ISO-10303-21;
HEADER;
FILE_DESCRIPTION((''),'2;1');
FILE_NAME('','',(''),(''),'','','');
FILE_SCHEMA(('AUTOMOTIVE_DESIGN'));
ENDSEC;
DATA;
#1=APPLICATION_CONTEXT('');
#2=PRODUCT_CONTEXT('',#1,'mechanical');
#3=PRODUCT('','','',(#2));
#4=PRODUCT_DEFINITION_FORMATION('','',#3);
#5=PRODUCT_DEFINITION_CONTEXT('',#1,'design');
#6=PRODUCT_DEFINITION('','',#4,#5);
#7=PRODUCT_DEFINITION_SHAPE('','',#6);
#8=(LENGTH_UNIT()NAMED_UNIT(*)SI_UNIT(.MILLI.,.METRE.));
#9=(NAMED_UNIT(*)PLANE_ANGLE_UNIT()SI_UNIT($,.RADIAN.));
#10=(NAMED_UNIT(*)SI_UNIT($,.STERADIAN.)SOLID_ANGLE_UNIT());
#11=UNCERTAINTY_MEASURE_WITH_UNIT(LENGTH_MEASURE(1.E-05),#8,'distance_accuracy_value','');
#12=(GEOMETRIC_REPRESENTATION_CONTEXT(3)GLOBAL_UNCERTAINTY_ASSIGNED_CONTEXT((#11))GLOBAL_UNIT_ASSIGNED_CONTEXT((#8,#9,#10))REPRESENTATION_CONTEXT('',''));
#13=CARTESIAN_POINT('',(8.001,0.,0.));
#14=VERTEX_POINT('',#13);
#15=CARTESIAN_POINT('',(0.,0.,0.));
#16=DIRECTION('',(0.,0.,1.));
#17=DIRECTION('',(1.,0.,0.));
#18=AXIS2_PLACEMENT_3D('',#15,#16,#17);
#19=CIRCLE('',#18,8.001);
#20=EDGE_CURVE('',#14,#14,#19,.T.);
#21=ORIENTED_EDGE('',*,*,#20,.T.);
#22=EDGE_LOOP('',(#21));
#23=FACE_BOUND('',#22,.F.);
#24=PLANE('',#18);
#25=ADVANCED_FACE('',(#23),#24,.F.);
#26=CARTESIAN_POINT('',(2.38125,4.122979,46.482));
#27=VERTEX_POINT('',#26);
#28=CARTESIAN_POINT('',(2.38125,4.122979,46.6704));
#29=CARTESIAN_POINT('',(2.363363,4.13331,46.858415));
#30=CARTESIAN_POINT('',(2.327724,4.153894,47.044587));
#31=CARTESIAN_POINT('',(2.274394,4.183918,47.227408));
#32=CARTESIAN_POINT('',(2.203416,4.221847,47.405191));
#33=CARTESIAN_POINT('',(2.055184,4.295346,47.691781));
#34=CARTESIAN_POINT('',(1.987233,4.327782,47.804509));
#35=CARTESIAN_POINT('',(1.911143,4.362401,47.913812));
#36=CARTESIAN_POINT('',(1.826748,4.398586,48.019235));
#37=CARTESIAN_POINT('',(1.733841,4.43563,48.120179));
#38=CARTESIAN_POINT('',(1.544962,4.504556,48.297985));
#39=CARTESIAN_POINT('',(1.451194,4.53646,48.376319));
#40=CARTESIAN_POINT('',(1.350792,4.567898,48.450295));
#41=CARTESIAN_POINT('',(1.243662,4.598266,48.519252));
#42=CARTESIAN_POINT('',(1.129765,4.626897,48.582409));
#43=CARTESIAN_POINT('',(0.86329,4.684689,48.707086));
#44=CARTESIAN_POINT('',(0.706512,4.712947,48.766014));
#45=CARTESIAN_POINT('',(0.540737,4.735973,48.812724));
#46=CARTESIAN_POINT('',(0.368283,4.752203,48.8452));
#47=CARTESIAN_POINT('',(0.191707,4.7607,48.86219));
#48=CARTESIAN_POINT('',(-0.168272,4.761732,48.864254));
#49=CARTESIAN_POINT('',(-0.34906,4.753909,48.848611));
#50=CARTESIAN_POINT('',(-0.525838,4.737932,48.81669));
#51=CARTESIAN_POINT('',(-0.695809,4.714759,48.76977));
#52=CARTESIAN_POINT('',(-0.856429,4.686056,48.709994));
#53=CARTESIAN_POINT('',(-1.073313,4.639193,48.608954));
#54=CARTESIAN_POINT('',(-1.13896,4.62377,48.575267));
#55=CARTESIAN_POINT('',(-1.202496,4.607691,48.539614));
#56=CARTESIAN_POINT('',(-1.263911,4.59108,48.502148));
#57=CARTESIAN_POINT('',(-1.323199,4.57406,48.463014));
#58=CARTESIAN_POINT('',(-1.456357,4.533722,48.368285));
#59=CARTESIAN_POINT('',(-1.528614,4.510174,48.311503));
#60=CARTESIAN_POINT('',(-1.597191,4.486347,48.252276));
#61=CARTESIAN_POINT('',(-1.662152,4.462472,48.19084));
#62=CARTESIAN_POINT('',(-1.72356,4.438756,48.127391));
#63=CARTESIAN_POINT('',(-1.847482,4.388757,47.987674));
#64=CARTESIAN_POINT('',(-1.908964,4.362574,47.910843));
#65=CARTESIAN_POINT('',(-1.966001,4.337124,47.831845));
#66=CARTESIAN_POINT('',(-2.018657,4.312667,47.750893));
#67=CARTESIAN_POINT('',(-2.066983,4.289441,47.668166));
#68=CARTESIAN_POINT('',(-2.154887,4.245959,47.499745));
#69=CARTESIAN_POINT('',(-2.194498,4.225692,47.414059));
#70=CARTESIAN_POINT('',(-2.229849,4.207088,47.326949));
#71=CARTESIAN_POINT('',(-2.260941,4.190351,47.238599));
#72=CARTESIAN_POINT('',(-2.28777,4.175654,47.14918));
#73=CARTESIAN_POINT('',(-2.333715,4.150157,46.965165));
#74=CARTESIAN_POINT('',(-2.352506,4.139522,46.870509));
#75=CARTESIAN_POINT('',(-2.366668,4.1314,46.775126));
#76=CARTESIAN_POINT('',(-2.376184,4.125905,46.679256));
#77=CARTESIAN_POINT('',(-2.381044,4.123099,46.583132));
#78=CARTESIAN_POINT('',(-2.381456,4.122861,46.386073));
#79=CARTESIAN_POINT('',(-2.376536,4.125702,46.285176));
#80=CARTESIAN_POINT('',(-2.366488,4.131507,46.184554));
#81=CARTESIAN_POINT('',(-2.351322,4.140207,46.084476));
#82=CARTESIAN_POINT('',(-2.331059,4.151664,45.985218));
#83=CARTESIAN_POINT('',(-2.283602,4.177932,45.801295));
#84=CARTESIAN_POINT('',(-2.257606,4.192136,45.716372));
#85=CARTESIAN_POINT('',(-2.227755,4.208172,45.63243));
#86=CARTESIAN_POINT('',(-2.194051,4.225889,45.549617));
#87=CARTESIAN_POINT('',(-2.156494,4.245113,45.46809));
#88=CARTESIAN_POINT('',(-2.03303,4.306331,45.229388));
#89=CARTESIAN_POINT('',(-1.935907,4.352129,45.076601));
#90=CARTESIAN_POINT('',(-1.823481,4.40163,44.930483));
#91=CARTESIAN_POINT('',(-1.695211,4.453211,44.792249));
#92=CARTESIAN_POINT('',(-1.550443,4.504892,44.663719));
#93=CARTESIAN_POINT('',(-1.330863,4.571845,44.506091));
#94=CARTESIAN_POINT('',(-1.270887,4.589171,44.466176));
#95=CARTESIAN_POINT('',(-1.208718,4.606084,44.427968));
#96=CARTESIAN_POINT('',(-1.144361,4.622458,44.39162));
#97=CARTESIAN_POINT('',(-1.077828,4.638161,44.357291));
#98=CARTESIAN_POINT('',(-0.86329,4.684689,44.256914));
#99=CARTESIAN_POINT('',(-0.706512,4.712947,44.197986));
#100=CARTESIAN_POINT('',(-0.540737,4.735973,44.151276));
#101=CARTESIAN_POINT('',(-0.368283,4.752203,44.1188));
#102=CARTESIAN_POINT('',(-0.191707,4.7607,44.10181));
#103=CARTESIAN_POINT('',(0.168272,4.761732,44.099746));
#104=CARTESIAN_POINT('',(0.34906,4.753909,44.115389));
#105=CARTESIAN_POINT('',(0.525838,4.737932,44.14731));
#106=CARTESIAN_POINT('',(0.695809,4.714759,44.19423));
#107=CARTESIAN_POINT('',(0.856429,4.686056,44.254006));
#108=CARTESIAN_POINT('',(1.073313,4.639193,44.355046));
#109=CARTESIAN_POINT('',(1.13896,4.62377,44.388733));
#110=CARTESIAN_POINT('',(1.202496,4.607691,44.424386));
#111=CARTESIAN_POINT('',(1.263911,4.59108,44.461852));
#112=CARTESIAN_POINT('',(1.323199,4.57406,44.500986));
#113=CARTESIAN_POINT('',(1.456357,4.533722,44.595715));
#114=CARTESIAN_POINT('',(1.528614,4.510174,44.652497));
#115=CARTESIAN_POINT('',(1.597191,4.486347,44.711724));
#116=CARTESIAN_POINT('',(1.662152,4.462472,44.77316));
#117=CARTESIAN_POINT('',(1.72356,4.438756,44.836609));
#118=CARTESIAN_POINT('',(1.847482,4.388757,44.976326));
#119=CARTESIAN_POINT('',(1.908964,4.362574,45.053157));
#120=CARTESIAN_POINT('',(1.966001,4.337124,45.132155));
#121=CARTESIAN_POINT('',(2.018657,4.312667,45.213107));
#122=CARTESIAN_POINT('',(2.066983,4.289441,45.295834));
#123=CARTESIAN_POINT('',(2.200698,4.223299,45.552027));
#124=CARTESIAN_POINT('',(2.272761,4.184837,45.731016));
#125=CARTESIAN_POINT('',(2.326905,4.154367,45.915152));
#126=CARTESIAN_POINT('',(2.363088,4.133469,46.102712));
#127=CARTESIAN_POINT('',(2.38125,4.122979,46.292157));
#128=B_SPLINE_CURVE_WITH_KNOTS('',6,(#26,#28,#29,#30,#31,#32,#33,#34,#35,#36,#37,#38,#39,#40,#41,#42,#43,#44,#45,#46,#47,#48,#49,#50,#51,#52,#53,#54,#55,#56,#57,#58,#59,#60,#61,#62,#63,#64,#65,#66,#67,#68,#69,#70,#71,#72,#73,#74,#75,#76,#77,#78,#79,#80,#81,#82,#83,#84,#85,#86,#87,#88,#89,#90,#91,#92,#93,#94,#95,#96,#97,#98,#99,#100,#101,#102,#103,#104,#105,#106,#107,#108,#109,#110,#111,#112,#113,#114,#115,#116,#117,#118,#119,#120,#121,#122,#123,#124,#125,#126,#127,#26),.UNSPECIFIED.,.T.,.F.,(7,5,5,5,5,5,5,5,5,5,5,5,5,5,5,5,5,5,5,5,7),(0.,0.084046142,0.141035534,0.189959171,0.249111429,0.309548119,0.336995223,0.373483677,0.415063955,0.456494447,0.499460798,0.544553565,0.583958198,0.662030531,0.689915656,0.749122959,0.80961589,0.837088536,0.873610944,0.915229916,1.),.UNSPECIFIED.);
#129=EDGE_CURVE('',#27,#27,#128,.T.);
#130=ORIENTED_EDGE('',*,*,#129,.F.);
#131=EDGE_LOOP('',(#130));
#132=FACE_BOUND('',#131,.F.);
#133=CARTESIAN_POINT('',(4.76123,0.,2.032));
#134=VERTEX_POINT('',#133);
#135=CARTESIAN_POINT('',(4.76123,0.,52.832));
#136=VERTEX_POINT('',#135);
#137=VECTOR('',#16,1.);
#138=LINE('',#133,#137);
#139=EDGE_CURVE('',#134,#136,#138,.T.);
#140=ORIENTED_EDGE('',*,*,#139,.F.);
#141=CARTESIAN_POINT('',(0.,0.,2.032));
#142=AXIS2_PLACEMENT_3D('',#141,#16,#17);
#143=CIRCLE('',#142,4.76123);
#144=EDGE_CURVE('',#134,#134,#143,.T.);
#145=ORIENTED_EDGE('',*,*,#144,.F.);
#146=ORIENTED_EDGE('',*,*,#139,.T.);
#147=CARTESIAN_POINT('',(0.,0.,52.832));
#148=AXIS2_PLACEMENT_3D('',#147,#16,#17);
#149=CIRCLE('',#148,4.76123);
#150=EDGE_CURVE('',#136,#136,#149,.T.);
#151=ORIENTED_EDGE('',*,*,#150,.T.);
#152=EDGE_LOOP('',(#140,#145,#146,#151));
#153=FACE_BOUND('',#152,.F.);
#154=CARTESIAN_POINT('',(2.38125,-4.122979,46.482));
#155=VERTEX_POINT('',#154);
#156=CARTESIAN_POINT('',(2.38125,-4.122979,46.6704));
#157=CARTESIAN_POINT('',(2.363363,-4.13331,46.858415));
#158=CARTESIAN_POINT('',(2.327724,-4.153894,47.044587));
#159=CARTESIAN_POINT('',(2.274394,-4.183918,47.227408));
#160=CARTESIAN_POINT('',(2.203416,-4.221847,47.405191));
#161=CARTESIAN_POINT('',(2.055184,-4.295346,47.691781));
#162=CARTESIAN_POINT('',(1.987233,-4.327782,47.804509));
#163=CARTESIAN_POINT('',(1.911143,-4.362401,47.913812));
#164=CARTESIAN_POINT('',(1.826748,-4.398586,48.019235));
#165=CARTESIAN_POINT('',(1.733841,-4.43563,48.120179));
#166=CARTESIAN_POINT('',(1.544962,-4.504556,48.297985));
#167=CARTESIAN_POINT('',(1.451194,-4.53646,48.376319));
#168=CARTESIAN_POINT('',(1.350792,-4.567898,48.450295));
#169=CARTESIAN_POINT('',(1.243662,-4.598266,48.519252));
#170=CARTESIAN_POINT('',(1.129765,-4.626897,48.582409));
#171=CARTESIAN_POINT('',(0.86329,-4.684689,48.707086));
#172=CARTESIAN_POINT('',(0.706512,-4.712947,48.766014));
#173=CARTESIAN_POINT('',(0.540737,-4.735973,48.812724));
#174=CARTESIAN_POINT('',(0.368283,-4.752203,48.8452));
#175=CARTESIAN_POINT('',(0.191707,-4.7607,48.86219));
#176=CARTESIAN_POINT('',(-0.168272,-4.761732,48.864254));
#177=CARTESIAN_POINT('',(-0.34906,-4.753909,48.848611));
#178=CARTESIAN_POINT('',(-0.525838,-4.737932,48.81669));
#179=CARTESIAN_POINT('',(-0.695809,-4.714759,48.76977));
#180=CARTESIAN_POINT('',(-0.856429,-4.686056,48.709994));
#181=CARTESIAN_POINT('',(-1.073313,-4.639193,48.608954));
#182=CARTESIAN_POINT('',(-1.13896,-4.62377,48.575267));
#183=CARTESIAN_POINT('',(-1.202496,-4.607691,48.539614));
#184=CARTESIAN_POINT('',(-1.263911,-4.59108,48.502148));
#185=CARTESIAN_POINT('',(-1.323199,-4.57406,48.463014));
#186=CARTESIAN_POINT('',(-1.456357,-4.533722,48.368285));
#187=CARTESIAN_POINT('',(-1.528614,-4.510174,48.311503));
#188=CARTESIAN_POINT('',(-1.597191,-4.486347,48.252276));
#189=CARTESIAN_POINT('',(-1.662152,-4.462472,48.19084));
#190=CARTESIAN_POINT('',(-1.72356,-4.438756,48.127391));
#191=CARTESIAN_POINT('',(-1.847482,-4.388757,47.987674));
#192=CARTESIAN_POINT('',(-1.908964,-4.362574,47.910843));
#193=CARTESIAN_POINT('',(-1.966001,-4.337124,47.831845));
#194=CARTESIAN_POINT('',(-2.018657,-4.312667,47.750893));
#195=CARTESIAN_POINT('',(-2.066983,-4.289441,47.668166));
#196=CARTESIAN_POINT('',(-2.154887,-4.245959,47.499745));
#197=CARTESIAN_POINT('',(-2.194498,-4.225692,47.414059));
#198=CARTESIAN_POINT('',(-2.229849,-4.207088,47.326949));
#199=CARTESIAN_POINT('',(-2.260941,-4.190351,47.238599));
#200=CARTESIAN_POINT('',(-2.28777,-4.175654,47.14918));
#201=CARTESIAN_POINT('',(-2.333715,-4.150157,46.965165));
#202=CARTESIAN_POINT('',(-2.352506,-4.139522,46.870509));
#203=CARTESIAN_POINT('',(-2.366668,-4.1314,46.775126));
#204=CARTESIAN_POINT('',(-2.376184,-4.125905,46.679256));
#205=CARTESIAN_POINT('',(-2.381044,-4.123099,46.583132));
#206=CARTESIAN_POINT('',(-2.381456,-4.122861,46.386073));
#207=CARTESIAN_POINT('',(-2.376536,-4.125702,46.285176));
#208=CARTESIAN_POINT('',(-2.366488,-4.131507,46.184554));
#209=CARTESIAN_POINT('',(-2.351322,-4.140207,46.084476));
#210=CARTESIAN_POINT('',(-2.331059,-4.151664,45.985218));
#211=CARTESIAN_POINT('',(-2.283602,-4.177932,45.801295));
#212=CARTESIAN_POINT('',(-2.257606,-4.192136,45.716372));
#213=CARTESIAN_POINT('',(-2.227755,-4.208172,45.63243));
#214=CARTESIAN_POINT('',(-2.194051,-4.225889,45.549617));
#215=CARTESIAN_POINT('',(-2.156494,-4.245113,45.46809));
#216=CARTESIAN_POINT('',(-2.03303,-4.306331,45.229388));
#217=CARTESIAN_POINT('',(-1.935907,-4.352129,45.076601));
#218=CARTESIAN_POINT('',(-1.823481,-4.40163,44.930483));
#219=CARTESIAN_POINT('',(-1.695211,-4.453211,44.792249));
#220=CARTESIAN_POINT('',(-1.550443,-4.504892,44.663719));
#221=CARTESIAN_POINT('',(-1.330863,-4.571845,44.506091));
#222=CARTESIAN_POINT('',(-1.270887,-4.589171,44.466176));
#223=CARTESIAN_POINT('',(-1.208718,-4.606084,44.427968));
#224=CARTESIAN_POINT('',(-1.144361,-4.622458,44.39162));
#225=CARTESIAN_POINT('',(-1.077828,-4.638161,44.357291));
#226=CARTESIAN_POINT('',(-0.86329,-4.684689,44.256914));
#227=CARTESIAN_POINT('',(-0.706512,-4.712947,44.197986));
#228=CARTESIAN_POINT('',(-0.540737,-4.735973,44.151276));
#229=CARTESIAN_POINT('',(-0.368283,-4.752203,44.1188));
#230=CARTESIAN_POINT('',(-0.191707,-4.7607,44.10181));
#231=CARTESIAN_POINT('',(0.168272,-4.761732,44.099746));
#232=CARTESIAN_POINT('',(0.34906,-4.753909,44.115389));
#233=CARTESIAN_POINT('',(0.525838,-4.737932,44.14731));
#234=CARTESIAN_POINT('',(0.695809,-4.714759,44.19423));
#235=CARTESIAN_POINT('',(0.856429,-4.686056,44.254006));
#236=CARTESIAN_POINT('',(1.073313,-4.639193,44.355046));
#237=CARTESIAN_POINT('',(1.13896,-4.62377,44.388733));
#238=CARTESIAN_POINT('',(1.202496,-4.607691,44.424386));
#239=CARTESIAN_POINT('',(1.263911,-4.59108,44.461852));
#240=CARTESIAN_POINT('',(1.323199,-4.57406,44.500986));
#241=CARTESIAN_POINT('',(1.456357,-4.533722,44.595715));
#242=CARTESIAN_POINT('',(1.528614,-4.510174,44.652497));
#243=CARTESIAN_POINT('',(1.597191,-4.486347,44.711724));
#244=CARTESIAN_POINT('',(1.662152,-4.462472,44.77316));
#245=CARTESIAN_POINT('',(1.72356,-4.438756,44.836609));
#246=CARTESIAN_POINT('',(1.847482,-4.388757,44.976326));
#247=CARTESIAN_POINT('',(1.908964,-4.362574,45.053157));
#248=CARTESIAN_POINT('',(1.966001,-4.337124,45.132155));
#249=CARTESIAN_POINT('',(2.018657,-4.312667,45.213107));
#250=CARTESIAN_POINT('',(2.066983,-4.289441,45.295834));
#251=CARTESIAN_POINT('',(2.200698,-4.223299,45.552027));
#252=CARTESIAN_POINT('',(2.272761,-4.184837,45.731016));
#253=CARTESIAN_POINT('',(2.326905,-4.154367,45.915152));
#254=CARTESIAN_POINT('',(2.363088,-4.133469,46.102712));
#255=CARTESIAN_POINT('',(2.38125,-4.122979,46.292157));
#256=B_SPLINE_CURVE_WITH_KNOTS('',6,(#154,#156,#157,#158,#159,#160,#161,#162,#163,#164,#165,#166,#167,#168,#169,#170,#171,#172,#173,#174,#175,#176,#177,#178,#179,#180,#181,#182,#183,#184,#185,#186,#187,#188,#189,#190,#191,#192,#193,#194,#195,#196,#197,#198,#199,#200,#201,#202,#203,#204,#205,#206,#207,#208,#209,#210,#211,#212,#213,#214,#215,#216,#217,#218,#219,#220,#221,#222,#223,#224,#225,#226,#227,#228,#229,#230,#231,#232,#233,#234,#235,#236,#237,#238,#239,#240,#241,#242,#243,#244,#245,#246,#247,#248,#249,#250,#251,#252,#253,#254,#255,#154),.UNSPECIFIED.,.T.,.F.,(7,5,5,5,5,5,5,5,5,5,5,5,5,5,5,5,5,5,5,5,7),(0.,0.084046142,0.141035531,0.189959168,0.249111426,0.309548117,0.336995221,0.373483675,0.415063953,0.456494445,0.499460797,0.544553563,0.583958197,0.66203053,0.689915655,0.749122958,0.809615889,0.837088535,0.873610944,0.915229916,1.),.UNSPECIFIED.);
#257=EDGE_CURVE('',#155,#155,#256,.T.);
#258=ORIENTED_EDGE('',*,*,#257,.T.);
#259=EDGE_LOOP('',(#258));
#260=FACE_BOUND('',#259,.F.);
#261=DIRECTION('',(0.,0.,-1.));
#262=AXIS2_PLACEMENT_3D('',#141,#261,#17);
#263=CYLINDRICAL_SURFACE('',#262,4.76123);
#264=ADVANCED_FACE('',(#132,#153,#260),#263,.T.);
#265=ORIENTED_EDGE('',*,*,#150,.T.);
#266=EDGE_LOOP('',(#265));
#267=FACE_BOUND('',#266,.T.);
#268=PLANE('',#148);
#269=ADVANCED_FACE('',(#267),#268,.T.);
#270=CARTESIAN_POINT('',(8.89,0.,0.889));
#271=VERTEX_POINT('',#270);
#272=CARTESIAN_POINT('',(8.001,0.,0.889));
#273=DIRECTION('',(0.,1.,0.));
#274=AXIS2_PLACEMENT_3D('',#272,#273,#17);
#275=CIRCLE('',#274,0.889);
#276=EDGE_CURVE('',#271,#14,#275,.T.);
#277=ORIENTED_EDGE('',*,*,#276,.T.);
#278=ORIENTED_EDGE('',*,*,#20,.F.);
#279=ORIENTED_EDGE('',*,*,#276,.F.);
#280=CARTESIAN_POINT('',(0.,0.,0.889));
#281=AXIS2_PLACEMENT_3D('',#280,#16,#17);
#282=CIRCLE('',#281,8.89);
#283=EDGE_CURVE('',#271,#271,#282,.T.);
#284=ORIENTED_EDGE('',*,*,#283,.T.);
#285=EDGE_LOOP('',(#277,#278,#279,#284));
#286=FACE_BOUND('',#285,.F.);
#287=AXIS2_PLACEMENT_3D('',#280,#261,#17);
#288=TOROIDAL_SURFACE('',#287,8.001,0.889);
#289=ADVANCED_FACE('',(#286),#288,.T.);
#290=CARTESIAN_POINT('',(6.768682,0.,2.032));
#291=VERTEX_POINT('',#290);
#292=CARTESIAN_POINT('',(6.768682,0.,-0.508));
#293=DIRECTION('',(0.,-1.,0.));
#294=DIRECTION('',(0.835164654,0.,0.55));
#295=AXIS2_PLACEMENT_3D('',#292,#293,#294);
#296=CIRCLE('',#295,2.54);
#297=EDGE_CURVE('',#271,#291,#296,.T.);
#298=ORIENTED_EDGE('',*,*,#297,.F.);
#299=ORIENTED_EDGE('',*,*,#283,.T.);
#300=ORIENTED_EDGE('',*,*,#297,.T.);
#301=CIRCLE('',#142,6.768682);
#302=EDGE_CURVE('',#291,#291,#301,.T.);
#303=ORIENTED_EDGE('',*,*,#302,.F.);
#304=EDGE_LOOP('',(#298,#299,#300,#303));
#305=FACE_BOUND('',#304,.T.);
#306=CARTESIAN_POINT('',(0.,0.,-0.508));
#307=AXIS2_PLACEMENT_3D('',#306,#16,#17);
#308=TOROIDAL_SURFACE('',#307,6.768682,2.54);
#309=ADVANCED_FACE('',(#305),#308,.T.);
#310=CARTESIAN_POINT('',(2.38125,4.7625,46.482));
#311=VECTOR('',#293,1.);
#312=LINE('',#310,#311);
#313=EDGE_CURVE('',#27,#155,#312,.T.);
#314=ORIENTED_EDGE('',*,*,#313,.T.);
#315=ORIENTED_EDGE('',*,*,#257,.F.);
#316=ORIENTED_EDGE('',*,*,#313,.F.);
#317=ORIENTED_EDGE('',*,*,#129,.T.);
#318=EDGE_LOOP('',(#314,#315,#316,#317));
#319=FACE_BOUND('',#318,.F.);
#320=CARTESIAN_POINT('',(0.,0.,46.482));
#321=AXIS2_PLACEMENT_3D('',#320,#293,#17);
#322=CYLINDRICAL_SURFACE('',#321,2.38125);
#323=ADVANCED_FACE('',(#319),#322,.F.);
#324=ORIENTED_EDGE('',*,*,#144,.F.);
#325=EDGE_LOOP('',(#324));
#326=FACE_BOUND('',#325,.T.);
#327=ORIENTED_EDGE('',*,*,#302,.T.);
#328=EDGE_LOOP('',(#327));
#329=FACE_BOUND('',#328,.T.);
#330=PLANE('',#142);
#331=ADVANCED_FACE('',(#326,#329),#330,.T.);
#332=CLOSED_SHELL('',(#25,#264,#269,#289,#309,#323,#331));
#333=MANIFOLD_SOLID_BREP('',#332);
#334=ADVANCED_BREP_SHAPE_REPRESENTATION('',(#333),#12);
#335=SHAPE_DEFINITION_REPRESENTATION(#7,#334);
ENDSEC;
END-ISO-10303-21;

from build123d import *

# Parameters (mm, degrees)
F0_R     = 8.89
F1_DEPTH = 2.032
F2_R     = 4.76123
F3_DEPTH = 50.8
F5_DEPTH = 4.7625
F6_R     = 0.889


# Not quite as in the source:
# - a fillet or chamfer that OpenCascade refuses, or shapes differently, is made with other operations: its cross-section is extruded or revolved along the edge and cut away or added


with BuildPart() as f1:
    # F0 (on Top) → F1 (new body)
    with BuildSketch(Plane.XY):
        Circle(F0_R)
    extrude(amount=F1_DEPTH)

    # F2 (on face) → F3 (join)
    with BuildSketch(Plane.XY.offset(2.032)):
        Circle(F2_R)
    extrude(amount=F3_DEPTH)

    # F4 (on Front) → F5 (cut, symmetric)
    with BuildSketch(Plane.XZ):
        with BuildLine():
            ThreePointArc((0, 48.86325), (-1.6837980227, 44.7982019773), (2.38125, 46.482))
            ThreePointArc((2.38125, 46.482), (1.6837980227, 48.1657980227), (0, 48.86325))
        make_face()
    extrude(amount=F5_DEPTH, both=True, mode=Mode.SUBTRACT)

    # F6
    f6_edges = [f1.edges().sort_by_distance(p)[0] for p in [
        (-8.89, 0, 0),
    ]]
    fillet(f6_edges, radius=F6_R)

    # F7: fillet of radius 2.54 on 1 edges, made by hand

    # F7_s1 → F7_t2 (revolve, cut)
    with BuildSketch(Plane.XZ):
        with BuildLine():
            ThreePointArc((8.89, 0.889), (7.9735095663, 1.7280657414), (6.7686817778, 2.032))
            Line((6.7686817778, 2.032), (6.7686817778, 2.0828))
            Line((6.7686817778, 2.0828), (8.89, 2.0828))
            Line((8.89, 2.0828), (8.9408, 2.032))
            ThreePointArc((8.9408, 2.032), (8.9408, 1.4605), (8.9324263644, 0.91694))
            Line((8.9324263644, 0.91694), (8.89, 0.889))
        make_face()
    revolve(axis=Axis((0, 0, 2.032), (0, 0, 1)), mode=Mode.SUBTRACT)


solid = f1.part
